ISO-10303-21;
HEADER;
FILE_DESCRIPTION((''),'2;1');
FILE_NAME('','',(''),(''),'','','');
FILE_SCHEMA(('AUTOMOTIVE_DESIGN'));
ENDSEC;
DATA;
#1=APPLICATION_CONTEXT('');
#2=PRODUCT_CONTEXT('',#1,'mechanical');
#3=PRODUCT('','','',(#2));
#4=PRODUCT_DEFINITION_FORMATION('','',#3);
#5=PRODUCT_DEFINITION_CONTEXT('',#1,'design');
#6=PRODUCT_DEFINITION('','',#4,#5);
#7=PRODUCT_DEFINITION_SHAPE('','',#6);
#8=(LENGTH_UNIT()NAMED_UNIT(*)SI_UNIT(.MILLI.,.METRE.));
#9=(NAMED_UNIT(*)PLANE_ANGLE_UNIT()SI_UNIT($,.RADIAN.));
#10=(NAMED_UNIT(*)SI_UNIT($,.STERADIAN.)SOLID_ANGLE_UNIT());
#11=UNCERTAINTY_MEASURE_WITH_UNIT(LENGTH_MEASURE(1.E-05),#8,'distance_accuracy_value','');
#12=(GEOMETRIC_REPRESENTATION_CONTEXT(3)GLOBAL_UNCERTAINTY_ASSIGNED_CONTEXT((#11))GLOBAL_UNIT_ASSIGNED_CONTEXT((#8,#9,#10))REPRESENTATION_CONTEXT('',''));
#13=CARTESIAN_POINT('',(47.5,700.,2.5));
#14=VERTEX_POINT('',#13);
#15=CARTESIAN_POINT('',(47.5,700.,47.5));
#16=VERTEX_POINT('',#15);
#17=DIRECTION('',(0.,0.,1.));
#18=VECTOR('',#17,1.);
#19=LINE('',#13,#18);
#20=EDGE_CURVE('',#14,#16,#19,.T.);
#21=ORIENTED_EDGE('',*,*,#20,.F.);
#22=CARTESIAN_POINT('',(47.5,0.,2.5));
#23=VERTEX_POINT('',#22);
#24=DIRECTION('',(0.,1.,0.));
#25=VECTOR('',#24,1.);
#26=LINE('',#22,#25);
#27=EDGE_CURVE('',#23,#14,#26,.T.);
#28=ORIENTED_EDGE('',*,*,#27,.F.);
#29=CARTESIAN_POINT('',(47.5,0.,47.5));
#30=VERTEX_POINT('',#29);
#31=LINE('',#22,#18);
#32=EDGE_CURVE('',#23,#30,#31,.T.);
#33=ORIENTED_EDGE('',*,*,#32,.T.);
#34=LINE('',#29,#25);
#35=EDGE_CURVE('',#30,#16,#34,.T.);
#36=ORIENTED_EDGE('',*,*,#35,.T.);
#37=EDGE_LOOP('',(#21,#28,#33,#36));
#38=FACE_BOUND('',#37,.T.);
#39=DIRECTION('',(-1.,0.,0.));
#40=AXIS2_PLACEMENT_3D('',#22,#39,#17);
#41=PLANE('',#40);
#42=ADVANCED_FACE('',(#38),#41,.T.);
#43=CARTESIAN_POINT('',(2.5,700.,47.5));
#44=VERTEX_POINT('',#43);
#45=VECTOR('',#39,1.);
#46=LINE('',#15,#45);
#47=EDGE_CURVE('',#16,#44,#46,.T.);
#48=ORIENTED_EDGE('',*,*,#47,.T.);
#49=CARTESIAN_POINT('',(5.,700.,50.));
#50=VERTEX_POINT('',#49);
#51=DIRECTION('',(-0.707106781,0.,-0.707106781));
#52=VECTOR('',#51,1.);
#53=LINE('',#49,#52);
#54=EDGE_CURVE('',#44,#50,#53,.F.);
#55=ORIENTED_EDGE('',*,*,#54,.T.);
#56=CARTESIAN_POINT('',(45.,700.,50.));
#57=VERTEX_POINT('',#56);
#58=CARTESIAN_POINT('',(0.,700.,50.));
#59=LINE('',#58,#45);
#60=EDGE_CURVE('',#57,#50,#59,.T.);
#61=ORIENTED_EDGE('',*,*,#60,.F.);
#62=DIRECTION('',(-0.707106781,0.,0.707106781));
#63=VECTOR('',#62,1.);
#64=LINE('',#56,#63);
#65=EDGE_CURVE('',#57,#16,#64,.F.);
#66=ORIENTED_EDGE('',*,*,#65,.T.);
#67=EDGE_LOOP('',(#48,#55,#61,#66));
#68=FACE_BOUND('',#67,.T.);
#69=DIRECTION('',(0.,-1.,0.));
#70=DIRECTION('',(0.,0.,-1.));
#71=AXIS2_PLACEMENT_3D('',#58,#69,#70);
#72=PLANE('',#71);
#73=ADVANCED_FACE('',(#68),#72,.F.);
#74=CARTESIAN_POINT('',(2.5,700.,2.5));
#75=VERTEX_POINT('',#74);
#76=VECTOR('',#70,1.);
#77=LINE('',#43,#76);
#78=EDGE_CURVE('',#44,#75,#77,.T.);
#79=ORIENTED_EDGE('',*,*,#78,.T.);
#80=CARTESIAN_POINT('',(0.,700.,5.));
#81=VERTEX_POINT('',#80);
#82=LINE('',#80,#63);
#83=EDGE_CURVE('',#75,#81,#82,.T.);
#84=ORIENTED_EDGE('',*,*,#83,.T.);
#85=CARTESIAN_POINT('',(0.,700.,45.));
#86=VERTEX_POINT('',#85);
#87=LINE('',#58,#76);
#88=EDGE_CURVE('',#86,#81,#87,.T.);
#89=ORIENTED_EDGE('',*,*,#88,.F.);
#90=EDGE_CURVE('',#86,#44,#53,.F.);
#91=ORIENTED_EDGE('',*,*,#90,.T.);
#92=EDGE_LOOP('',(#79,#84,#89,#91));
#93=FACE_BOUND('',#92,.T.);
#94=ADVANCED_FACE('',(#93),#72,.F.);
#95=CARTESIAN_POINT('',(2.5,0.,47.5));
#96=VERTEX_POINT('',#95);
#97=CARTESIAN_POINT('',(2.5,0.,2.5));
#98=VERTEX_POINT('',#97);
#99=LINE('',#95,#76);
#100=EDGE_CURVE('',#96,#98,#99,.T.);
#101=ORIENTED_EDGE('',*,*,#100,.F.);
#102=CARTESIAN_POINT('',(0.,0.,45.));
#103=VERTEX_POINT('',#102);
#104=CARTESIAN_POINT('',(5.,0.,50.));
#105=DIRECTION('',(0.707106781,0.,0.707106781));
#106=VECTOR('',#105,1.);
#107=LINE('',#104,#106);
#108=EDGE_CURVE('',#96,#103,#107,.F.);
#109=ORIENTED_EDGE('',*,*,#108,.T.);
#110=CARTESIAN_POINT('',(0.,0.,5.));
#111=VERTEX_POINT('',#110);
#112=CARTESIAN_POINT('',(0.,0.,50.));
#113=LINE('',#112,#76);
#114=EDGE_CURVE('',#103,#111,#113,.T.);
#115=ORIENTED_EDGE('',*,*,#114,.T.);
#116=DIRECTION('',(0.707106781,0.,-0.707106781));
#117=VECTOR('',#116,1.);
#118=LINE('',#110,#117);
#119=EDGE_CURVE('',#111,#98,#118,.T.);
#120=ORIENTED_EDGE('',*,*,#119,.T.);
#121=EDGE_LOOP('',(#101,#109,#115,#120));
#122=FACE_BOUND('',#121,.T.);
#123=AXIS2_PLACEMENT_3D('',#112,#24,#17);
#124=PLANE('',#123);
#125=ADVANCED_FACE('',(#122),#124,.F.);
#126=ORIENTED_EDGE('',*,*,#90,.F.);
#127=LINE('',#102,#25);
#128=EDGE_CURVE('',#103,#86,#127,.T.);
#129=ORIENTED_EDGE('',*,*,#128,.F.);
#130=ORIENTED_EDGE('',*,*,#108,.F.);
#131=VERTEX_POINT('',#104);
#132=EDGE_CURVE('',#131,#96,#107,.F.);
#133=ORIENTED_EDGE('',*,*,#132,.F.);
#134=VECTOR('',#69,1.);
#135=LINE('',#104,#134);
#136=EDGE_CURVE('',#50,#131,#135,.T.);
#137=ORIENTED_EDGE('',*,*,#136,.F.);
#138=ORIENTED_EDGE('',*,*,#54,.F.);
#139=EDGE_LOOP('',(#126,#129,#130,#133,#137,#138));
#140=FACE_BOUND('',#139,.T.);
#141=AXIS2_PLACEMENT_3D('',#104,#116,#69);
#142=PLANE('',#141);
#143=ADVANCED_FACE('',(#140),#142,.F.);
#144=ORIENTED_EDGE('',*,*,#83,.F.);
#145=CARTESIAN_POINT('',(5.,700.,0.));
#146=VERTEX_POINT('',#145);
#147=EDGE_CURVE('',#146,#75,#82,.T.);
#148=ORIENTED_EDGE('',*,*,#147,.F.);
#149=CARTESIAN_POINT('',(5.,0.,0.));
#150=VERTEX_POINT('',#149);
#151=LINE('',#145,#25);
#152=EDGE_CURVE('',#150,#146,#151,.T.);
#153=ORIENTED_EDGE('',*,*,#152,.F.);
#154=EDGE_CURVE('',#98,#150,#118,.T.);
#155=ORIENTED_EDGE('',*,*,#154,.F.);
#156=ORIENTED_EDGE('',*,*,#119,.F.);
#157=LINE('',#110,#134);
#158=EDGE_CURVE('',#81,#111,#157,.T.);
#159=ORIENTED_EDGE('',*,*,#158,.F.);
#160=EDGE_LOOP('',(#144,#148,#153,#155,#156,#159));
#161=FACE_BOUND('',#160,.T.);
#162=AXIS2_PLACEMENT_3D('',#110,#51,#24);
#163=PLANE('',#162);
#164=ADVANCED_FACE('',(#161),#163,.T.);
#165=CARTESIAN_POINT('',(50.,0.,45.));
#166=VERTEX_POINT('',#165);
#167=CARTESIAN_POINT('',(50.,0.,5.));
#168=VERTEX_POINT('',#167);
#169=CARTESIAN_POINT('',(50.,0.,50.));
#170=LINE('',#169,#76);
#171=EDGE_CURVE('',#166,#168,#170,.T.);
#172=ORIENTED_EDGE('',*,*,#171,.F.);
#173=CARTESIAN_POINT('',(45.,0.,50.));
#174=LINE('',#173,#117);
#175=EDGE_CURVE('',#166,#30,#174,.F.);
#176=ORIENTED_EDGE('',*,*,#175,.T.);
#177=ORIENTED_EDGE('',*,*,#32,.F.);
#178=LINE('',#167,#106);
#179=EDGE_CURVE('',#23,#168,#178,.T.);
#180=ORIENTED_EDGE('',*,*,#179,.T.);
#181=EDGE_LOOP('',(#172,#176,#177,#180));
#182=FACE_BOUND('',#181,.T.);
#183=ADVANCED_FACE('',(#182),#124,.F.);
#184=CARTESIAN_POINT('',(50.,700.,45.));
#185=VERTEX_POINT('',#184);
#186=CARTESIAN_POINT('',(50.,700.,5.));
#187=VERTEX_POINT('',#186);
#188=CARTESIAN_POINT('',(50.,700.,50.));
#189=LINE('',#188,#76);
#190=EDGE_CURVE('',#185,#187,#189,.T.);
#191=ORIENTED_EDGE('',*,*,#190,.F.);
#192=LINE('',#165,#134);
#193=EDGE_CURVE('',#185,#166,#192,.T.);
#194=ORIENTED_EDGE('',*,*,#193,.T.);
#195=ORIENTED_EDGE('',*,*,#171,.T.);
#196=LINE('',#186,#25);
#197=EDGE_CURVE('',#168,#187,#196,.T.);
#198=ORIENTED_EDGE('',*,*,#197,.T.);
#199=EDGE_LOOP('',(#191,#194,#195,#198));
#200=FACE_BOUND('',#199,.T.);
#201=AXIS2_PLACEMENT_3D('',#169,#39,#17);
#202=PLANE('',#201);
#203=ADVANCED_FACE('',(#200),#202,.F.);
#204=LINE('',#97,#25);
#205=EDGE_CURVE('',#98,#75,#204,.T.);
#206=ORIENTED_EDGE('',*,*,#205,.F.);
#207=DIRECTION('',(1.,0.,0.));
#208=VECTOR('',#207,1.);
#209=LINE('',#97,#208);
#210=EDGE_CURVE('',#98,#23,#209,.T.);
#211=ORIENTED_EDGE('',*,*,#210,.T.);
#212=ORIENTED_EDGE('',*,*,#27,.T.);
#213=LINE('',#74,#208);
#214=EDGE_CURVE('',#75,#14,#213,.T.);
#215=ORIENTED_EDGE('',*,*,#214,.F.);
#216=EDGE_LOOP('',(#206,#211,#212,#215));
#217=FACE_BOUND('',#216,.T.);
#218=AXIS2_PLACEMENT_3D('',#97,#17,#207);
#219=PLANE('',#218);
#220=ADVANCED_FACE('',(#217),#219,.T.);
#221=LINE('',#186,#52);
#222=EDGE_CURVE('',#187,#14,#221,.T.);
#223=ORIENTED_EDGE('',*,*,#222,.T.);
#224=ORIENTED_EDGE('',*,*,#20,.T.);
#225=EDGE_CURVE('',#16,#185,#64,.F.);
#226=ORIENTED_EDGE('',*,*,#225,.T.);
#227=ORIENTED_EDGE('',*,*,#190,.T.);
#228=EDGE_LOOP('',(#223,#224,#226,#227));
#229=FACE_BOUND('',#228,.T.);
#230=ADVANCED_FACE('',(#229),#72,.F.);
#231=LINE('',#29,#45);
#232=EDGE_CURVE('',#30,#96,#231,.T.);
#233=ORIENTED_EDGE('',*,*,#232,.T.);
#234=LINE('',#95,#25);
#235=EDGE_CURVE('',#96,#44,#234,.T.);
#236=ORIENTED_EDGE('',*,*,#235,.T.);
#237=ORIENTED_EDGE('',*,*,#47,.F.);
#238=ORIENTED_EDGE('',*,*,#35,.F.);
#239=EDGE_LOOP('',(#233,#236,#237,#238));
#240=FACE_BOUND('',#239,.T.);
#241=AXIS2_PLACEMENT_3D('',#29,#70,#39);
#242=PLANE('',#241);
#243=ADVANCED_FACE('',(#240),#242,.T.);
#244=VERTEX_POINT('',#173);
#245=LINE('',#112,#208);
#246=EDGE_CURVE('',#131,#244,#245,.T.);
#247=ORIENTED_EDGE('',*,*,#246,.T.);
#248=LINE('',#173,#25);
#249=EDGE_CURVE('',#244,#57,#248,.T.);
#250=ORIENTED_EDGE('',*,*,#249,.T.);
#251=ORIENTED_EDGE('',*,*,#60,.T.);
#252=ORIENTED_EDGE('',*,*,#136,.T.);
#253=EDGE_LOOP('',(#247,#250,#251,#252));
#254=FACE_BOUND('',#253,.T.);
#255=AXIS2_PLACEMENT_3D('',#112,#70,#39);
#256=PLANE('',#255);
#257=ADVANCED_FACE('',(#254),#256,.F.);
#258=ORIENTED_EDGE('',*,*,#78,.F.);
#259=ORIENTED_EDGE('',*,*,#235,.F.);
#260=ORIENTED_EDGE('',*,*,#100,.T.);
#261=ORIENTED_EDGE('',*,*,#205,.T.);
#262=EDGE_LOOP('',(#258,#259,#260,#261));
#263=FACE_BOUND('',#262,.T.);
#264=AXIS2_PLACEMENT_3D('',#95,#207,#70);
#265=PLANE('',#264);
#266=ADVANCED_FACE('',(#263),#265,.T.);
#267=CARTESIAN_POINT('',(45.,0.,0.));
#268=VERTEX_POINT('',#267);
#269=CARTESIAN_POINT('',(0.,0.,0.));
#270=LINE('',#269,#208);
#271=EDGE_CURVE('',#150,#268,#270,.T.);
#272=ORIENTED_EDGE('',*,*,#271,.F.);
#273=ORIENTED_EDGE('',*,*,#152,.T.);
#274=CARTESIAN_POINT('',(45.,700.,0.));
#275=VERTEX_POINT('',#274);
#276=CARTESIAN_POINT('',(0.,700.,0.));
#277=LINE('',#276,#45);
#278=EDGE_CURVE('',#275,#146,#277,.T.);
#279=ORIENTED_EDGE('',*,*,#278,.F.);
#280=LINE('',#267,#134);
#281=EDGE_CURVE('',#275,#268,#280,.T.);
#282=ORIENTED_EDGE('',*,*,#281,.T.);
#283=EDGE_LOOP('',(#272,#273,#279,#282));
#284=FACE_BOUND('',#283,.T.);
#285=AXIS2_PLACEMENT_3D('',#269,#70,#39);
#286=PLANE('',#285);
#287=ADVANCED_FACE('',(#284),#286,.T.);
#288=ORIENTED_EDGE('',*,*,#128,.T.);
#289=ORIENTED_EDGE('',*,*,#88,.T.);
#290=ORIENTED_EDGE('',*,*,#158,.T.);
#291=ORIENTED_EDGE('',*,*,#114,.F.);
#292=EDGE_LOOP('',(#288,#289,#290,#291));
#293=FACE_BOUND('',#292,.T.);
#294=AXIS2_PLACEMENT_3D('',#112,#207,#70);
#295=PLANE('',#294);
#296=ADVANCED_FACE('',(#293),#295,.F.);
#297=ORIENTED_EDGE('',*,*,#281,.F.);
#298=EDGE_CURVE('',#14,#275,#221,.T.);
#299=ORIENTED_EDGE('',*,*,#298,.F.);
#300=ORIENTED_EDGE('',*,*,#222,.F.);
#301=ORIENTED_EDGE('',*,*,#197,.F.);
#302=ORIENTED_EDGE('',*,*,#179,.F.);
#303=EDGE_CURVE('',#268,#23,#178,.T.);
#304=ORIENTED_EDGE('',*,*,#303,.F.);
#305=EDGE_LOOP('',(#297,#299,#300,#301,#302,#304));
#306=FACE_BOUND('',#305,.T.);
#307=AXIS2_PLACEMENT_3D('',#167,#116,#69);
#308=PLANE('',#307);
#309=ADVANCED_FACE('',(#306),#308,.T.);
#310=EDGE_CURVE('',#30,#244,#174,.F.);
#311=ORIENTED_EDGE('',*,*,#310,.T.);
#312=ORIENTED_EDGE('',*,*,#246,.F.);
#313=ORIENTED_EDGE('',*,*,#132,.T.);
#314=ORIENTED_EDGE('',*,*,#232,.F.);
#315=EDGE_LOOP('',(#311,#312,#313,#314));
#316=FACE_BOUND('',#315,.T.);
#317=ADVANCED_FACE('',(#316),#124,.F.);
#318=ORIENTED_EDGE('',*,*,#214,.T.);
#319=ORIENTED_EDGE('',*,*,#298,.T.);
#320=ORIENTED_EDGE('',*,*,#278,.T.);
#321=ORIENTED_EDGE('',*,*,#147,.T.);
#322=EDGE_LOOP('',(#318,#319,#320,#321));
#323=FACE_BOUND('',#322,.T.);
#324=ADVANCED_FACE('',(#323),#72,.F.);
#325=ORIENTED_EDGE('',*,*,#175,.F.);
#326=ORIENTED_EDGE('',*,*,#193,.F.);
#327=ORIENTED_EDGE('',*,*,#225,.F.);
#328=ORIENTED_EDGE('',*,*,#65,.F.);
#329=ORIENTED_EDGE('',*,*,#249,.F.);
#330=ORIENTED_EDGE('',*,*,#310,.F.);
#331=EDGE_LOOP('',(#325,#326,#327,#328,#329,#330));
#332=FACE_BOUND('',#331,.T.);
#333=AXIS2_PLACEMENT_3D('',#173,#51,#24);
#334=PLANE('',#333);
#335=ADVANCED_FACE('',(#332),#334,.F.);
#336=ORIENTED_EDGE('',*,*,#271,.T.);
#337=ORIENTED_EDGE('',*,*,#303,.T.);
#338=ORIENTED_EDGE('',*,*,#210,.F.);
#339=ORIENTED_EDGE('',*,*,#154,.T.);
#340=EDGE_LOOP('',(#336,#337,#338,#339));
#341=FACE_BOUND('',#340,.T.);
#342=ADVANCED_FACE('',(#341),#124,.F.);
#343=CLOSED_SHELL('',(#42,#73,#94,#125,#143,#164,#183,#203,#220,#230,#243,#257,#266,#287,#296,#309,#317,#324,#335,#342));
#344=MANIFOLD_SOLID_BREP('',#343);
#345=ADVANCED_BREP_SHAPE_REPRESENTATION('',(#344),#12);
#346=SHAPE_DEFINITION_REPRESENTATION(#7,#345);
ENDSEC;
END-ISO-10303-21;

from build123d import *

# Parameters (mm, degrees)
SKETCH1_W           = 50
SKETCH1_H           = 700
BOSS_EXTRUDE1_DEPTH = 50
SKETCH2_W           = 45
SKETCH2_H           = 45
CUT_EXTRUDE1_DEPTH  = 704.562363974
CHAMFER5_SIZE       = 5


with BuildPart() as part:
    # Sketch1 → Boss-Extrude1 (new body)
    with BuildSketch(Plane.XY):
        with Locations((25, 350)):
            Rectangle(SKETCH1_W, SKETCH1_H)
    extrude(amount=BOSS_EXTRUDE1_DEPTH)

    # Sketch2 → Cut-Extrude1 (cut, through all)
    with BuildSketch(Plane(origin=(0, 700, 0), x_dir=(1, 0, 0), z_dir=(0, 1, 0))):
        with Locations((25, -25)):
            Rectangle(SKETCH2_W, SKETCH2_H)
    extrude(amount=-CUT_EXTRUDE1_DEPTH, mode=Mode.SUBTRACT)

    # Chamfer5
    chamfer5_edges = [part.edges().sort_by_distance(p)[0] for p in [
        (50, 350, 50),
        (0, 350, 50),
        (50, 350, 0),
        (0, 350, 0),
    ]]
    chamfer(chamfer5_edges, length=CHAMFER5_SIZE - 0.0001)  # a hair under: the kernel refuses the full size


solid = part.part
